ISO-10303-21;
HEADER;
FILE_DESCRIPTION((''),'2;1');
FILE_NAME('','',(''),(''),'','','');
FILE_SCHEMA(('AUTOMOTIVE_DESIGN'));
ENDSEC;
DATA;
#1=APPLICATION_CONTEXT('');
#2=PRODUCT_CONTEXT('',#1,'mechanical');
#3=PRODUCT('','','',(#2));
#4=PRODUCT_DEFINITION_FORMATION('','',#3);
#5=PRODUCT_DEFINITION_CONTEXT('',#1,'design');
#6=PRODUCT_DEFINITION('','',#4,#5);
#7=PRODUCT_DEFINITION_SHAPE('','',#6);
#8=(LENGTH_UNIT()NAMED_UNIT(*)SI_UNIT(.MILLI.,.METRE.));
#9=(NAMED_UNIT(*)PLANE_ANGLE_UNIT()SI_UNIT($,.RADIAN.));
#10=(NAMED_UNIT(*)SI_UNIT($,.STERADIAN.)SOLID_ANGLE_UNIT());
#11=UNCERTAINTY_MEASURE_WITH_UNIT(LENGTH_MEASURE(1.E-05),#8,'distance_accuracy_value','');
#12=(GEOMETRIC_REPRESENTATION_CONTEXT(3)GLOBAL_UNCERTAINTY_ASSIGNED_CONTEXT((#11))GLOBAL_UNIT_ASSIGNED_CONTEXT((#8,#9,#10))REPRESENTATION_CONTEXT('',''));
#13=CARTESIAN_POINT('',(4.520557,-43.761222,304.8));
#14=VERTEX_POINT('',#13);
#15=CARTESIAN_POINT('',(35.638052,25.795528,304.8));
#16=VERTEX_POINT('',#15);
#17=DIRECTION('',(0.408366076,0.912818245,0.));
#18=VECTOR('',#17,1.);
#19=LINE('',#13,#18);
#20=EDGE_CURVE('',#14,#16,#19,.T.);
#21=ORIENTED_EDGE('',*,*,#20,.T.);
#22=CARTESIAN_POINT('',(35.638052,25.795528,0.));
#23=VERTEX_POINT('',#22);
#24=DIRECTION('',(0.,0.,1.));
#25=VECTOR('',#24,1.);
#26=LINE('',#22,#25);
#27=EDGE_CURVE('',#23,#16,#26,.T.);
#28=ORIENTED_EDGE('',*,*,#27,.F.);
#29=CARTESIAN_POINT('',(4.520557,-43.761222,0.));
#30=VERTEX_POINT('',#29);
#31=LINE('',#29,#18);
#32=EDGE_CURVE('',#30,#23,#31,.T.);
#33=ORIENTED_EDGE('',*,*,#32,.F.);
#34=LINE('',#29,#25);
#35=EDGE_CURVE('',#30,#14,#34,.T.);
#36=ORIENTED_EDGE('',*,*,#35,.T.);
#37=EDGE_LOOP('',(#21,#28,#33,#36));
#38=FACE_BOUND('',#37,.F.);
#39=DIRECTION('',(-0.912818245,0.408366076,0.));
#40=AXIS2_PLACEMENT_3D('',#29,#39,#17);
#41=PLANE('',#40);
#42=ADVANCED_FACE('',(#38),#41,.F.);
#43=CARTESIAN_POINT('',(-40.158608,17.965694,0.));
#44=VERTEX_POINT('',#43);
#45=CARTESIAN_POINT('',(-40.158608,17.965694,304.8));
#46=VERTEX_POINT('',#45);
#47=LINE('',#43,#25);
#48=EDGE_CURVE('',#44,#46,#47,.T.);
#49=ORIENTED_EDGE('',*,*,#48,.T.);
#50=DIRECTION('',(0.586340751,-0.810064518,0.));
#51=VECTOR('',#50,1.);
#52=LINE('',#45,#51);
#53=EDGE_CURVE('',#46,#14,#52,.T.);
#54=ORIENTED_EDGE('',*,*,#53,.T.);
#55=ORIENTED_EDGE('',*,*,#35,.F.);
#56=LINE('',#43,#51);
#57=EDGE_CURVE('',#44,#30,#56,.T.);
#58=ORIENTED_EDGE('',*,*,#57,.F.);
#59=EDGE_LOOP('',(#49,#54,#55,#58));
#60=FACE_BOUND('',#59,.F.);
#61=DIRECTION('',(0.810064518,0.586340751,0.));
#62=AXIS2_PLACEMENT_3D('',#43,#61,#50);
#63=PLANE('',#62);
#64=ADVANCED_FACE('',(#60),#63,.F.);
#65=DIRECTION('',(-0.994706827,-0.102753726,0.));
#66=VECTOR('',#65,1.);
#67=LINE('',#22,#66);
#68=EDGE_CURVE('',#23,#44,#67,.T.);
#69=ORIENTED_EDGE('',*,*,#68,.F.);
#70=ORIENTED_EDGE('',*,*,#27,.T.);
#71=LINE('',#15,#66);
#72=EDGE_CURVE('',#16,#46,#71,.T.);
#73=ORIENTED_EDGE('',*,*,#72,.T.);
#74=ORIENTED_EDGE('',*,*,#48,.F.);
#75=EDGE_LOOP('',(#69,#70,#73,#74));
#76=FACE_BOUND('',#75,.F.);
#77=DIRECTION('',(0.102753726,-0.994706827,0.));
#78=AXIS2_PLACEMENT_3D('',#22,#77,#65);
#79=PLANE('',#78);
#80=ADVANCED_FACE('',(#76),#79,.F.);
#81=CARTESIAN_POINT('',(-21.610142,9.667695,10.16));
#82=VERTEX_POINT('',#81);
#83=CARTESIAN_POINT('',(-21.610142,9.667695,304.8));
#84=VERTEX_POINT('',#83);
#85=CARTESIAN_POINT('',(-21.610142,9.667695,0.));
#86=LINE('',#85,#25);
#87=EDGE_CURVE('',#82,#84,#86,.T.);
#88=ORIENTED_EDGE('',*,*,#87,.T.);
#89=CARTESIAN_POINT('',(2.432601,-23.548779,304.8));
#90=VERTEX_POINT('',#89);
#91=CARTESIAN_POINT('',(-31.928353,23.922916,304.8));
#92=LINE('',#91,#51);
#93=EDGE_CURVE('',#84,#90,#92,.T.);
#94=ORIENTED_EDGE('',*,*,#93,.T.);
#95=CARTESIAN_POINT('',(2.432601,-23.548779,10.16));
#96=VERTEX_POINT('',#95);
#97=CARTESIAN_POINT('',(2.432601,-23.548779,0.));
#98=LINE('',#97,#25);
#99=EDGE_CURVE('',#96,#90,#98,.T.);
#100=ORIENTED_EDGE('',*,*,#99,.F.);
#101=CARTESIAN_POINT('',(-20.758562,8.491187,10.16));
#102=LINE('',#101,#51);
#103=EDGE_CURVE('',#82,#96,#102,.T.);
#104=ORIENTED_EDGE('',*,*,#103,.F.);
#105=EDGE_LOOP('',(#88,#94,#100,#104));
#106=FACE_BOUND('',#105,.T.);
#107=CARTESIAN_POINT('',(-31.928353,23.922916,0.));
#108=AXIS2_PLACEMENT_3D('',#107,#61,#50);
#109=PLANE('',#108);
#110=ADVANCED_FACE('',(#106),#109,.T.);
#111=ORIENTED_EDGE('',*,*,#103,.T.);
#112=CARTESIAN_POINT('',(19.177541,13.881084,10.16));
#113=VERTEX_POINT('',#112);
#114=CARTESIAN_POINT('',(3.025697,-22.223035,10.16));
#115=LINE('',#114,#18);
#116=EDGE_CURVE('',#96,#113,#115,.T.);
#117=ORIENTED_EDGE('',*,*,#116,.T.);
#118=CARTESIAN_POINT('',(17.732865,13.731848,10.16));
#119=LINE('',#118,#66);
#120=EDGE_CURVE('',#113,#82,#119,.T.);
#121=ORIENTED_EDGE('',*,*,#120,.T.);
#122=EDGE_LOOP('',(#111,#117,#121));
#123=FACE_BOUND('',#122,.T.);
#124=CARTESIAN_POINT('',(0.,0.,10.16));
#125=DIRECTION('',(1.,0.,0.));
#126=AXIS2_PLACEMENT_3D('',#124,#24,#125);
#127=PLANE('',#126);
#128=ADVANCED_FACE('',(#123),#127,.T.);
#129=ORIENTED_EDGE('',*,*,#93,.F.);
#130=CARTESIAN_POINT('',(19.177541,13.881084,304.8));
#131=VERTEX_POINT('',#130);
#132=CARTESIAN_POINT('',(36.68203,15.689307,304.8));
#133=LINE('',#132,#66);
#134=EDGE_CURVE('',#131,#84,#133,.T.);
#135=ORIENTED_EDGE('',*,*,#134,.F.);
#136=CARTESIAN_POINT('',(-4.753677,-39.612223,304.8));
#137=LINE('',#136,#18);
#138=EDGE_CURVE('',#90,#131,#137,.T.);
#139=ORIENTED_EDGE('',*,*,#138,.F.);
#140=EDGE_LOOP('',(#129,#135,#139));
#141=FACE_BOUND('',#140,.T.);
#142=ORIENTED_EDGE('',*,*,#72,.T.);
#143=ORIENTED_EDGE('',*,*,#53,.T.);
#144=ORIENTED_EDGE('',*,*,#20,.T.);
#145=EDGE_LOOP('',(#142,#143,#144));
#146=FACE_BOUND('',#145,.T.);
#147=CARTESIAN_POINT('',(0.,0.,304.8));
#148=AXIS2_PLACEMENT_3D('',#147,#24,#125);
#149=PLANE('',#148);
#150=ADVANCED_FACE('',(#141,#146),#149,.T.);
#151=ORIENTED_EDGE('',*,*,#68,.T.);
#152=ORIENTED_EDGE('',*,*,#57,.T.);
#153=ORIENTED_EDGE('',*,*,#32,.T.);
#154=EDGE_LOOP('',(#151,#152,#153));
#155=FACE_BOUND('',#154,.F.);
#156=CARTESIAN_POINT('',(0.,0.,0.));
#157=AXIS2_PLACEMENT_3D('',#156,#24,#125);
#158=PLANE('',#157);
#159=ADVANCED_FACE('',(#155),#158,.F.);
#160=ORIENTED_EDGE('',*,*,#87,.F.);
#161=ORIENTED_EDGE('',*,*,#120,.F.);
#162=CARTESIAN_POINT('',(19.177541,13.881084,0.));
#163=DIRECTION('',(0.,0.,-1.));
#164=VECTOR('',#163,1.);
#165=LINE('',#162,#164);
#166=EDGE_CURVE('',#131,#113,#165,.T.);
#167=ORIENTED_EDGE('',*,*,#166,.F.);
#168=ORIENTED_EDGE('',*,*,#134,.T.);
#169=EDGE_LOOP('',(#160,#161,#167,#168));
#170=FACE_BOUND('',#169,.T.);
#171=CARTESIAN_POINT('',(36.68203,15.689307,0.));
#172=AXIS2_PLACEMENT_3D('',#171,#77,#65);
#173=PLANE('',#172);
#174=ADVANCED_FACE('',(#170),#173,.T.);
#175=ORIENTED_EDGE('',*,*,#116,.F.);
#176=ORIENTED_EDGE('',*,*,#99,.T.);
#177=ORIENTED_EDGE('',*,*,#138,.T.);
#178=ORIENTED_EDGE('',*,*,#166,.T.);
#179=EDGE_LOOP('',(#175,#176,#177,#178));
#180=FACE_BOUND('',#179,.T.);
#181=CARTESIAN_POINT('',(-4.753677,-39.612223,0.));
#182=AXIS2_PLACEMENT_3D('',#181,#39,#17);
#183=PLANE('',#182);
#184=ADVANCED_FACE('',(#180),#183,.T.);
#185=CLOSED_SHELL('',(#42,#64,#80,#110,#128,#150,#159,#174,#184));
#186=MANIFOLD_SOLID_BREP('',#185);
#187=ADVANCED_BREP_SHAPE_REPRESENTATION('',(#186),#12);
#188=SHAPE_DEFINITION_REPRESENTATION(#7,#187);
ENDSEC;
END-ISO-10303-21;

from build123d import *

# Parameters (mm, degrees)
F1_DEPTH = 304.8
F2_T     = -10.16


# Not quite as in the source:
# - a length typed as a fraction of an inch, garbled in the dataset ("3 / 203.2 mm" for 3/8 in), is restored


with BuildPart() as f1:
    # F0 (on Top) → F1 (new body)
    with BuildSketch(Plane.XY):
        Polygon((35.6380517451, 25.7955280584), (-40.1586084752, 17.9656941234), (4.5205567301, -43.7612221819), align=None)
    extrude(amount=F1_DEPTH)

    # F2
    f2_openings = [f1.faces().sort_by_distance(p)[0] for p in [
        (0, 0, 304.8),
    ]]
    offset(amount=F2_T, openings=f2_openings)


solid = f1.part
